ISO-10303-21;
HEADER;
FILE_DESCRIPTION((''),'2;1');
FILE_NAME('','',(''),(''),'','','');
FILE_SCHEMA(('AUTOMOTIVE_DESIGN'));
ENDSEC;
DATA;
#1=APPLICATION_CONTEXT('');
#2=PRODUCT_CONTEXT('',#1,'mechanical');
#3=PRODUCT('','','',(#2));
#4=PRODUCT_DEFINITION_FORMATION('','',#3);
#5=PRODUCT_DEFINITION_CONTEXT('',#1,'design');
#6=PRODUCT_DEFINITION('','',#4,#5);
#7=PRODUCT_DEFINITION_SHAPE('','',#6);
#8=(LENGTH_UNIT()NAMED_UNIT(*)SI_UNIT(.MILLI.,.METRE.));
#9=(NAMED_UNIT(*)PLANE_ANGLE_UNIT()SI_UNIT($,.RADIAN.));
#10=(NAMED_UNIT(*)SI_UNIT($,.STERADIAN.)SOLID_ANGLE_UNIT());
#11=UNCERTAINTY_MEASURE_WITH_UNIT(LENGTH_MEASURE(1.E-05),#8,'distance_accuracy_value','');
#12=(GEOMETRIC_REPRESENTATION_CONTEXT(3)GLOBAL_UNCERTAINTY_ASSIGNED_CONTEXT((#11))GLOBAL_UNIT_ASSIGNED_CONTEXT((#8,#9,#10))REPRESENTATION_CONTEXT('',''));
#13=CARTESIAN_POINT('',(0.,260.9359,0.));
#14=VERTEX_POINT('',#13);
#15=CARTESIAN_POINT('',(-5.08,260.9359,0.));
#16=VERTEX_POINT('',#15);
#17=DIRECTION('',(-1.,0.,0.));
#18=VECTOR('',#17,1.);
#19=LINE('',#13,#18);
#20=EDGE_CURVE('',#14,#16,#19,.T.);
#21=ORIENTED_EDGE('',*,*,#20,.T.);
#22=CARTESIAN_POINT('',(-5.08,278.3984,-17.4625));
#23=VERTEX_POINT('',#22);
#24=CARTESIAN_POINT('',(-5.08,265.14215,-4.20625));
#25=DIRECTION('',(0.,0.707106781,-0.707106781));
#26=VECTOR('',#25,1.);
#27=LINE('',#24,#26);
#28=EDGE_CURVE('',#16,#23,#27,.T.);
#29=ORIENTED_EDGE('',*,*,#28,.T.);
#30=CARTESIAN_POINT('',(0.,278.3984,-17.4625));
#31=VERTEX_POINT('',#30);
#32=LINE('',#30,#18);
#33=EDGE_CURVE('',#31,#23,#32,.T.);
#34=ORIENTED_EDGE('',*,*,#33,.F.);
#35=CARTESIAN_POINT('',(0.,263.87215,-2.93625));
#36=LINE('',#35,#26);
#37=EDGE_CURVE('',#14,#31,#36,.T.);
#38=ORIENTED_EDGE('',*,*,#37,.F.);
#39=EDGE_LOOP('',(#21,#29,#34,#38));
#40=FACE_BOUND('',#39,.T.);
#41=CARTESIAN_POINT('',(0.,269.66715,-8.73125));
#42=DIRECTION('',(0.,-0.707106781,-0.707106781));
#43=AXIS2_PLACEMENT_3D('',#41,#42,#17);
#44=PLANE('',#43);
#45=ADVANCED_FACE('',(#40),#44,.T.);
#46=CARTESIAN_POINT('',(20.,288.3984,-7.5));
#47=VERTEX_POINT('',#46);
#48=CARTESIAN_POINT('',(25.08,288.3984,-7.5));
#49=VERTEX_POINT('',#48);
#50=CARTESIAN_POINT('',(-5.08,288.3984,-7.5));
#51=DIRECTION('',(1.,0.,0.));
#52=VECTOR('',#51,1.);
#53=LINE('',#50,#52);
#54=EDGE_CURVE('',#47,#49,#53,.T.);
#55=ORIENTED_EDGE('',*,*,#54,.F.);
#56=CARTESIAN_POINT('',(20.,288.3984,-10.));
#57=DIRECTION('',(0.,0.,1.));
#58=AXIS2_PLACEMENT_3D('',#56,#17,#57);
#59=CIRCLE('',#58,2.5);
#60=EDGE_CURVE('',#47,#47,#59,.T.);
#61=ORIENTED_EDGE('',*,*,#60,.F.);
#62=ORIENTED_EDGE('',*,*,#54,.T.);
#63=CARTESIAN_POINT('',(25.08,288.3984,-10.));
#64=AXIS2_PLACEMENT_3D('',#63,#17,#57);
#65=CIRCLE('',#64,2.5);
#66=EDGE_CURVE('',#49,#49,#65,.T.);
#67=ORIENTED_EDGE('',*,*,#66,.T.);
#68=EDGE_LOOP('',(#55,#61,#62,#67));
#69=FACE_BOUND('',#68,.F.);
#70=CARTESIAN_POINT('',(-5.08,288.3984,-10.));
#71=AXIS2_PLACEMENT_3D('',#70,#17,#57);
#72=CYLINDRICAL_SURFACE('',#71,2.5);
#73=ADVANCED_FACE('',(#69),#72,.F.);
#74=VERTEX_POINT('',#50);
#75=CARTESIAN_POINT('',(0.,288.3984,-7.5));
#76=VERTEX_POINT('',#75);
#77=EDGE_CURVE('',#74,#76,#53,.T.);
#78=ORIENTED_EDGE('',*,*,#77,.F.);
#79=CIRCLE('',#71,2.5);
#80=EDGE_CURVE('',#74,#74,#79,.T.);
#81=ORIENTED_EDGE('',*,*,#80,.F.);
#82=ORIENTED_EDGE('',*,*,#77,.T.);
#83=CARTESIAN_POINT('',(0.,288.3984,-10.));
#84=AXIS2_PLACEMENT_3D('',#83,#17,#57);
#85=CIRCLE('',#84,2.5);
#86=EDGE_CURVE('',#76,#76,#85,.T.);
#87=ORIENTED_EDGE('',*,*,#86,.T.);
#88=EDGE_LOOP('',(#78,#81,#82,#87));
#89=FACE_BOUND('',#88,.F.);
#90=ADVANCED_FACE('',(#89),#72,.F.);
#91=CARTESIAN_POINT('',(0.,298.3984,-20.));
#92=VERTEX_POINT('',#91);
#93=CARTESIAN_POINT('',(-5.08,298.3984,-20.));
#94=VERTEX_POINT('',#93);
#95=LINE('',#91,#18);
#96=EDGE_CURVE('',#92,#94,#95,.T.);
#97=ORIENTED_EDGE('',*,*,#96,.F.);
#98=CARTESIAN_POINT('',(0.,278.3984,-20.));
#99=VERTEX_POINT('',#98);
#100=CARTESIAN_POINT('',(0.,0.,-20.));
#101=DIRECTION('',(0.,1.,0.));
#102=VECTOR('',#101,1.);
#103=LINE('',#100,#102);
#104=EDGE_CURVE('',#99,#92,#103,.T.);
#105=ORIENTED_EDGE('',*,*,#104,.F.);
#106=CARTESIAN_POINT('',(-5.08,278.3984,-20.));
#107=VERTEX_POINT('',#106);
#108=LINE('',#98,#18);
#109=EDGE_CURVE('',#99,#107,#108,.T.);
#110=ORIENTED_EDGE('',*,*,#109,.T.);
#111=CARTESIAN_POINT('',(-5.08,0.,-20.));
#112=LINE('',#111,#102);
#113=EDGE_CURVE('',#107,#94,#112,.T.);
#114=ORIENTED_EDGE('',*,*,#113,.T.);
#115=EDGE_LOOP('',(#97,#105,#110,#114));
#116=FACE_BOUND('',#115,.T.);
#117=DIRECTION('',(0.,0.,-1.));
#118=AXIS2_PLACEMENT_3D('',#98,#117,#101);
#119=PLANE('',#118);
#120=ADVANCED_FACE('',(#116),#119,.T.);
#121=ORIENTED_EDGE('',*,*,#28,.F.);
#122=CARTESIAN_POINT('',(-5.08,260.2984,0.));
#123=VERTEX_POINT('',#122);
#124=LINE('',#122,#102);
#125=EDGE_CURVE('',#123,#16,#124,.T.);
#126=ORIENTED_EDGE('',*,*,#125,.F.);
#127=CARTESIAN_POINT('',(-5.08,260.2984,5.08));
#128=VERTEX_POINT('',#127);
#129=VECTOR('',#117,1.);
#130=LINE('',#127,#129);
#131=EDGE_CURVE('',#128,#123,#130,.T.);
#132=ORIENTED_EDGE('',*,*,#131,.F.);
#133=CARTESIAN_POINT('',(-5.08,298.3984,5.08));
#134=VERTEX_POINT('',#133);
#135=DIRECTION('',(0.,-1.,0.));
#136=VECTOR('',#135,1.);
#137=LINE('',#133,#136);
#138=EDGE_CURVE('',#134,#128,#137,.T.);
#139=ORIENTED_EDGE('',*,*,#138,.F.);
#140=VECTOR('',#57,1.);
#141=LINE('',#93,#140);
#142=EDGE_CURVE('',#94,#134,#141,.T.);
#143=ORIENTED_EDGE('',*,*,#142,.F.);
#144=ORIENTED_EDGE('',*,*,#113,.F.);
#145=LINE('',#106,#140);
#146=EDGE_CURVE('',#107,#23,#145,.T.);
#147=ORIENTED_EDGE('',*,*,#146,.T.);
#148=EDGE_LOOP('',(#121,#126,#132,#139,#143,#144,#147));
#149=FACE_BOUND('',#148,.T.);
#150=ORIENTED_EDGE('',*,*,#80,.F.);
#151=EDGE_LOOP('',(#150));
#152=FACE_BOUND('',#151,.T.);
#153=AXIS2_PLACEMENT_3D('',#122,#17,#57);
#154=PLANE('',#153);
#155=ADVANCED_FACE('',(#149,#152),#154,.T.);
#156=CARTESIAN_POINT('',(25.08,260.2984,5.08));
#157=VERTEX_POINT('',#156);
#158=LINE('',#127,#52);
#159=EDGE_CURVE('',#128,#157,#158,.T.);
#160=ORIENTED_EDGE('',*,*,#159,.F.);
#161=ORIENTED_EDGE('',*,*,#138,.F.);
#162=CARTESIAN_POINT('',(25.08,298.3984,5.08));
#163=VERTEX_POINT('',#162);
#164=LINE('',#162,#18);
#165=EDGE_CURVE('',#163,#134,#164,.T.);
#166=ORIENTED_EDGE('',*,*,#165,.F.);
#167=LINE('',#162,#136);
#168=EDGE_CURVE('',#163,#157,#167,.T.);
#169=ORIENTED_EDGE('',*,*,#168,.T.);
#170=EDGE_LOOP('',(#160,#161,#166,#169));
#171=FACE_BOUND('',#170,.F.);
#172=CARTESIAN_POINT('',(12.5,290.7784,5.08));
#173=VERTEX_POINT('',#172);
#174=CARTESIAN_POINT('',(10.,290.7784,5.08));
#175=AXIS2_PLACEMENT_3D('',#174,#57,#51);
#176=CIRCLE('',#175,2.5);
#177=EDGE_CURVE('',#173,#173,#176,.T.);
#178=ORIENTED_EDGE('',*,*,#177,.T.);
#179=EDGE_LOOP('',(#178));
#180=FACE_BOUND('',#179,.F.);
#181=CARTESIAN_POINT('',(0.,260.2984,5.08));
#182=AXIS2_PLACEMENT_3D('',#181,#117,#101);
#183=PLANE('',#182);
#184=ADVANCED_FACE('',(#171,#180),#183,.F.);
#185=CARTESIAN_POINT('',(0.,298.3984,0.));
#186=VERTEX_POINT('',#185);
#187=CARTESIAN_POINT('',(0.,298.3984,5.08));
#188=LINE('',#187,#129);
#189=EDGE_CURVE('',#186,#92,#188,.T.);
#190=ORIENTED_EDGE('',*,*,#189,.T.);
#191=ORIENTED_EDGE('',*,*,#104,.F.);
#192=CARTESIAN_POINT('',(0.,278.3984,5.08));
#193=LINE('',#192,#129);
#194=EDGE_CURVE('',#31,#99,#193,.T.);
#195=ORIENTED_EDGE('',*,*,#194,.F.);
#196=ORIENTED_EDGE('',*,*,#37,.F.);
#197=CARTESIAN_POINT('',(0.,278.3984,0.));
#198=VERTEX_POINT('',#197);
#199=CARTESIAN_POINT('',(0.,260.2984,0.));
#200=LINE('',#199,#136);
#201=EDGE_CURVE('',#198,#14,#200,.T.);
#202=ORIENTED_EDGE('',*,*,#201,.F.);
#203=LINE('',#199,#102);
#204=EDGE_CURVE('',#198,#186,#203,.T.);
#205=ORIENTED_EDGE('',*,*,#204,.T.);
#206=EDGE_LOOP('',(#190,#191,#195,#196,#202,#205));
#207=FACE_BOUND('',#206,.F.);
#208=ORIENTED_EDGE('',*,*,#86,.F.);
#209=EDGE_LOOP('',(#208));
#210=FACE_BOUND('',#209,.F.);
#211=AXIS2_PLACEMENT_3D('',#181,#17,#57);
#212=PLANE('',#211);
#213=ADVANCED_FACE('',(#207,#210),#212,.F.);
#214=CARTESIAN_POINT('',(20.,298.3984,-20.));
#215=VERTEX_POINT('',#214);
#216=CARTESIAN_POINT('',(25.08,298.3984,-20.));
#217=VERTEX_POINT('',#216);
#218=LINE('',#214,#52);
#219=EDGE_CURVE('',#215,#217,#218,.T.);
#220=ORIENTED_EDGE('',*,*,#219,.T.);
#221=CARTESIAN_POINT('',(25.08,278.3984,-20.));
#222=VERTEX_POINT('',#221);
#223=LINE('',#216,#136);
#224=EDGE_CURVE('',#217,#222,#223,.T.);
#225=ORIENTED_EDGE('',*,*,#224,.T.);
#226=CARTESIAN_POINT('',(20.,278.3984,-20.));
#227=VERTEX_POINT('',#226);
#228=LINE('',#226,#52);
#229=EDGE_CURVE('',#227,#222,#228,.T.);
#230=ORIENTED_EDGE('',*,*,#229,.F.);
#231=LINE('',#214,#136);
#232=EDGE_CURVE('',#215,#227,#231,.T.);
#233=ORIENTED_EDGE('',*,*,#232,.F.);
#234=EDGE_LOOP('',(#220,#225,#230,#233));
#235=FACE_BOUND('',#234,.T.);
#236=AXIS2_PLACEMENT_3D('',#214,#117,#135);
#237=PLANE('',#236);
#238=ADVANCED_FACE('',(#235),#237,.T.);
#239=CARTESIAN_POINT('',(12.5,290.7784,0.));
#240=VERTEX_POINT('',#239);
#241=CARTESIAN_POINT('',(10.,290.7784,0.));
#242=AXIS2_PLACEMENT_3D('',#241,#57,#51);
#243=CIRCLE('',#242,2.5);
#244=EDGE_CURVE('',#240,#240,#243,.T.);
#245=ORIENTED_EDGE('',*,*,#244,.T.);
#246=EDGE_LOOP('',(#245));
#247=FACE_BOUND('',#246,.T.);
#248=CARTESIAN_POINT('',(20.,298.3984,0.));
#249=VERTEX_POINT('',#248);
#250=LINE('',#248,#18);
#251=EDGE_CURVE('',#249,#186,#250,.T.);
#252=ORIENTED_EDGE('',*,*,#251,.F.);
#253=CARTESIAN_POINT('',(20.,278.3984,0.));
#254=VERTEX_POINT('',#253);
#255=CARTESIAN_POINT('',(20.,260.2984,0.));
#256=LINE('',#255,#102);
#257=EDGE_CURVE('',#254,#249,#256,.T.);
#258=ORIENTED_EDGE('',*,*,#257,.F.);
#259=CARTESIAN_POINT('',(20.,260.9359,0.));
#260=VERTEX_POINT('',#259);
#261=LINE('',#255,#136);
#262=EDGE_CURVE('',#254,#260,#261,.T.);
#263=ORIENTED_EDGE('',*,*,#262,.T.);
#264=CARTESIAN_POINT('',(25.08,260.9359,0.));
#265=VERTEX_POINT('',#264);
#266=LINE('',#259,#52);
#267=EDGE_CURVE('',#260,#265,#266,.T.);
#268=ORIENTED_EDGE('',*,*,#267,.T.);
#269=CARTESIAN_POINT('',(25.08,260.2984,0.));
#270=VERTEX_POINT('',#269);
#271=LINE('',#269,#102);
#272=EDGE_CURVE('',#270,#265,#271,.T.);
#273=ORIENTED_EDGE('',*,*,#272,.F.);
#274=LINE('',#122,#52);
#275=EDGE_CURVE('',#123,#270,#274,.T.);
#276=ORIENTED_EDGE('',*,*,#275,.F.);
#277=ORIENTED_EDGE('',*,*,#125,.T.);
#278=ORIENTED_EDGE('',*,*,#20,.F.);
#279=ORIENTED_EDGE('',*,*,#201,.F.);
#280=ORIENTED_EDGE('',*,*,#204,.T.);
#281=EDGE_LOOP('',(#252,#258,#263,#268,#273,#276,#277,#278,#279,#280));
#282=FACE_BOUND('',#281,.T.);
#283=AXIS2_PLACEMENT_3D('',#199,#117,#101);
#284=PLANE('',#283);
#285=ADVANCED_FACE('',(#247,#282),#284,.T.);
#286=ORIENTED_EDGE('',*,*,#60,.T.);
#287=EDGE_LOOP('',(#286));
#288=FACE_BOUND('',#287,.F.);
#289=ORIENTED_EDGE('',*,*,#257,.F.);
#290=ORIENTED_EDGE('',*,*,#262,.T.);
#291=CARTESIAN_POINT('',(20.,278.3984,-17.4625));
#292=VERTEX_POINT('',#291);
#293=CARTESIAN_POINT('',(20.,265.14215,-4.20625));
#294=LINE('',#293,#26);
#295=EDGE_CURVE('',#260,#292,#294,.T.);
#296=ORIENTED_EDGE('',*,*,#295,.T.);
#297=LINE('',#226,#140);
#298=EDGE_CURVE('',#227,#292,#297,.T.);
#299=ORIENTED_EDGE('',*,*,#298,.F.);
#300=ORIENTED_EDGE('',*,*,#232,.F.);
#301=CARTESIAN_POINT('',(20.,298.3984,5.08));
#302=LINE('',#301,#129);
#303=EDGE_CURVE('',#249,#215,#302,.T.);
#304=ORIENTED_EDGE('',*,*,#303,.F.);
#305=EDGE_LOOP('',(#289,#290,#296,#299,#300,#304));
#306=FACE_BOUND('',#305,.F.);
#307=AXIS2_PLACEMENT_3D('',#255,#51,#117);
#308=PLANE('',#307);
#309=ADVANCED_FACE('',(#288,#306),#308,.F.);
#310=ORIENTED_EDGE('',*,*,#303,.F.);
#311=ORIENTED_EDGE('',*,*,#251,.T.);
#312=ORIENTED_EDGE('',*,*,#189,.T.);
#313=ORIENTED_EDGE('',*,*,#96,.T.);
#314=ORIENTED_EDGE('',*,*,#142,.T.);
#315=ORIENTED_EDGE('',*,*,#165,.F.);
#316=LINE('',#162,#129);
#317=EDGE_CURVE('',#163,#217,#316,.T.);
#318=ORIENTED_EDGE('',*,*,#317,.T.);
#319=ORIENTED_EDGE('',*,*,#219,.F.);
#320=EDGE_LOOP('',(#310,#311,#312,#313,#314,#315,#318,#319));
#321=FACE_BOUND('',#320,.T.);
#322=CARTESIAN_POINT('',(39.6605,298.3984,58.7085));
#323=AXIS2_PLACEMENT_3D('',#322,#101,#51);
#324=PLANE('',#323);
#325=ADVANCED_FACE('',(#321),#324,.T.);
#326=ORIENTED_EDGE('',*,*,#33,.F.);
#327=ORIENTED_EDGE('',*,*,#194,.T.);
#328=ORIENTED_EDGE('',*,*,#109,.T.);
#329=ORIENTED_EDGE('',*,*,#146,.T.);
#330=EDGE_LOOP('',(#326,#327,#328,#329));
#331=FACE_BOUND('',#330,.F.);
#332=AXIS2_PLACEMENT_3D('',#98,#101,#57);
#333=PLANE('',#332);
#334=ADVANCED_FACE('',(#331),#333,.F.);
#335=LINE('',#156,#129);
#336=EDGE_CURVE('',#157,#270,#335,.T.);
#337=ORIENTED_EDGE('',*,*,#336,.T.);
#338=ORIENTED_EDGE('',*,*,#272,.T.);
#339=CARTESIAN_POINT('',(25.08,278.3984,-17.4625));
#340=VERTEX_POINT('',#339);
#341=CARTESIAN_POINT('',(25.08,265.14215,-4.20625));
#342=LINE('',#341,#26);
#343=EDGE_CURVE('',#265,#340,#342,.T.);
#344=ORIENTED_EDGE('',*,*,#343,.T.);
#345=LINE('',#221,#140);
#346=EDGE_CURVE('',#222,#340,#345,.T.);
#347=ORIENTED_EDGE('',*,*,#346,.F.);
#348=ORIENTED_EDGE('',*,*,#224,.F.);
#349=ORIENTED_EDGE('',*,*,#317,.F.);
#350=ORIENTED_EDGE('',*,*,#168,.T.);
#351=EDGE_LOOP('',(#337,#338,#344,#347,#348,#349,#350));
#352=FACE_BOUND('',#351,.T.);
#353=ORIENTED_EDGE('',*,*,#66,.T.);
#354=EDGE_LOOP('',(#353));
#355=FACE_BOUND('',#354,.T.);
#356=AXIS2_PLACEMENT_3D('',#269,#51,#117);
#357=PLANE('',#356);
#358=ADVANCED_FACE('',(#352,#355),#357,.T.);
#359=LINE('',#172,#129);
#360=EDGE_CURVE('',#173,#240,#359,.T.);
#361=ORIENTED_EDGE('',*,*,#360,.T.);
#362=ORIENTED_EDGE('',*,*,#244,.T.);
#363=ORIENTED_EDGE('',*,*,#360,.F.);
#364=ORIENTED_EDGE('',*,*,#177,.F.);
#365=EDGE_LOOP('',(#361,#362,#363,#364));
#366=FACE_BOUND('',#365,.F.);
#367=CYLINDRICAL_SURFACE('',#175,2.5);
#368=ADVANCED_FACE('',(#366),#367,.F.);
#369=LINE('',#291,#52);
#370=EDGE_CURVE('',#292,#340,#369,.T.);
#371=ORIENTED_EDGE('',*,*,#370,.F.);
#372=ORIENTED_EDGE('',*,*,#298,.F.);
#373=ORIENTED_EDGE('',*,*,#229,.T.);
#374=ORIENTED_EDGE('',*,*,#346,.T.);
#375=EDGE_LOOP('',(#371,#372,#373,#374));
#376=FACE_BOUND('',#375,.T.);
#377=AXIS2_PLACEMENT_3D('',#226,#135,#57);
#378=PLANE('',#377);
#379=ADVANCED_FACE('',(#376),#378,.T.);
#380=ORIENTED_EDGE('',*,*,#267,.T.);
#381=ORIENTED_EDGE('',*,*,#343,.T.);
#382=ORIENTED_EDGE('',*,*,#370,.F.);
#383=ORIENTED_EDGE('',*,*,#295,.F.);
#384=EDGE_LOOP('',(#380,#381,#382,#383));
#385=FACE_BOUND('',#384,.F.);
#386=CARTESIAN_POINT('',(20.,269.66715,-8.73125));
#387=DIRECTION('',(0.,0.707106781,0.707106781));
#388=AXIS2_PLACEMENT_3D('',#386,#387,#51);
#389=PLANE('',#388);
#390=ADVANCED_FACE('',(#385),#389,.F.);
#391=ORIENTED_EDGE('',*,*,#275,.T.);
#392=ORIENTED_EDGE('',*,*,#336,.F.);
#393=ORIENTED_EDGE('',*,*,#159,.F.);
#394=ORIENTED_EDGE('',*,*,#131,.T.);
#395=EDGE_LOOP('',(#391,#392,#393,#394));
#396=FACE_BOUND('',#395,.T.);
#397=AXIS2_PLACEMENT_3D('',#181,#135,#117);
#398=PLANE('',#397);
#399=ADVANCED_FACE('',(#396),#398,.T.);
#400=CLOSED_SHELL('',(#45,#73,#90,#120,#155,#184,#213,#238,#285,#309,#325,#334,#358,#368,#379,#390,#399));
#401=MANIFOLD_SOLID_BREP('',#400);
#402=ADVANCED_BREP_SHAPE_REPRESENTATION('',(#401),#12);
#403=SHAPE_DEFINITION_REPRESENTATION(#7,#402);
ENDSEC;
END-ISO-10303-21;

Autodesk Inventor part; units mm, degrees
ref_plane "YZ Plane" through (0, 0, 0) normal (1, 0, 0) x (0, 1, 0)
ref_plane "XZ Plane" through (0, 0, 0) normal (0, 1, 0) x (-1, 0, 0)
ref_plane "XY Plane" through (0, 0, 0) normal (0, 0, 1) x (1, 0, 0)
ref_plane "Work Plane1" through (39.6605, 279.3484, 58.7085) normal (0, 1, 0) x (1, 0, 0)
sketch "Sketch1" plane through (39.6605, 279.3484, 58.7085) normal (0, 1, 0) x (1, 0, 0)
  line L0 (-19.6605, 58.7085) -> (-19.6605, 78.7085) projected
  line L1 (-19.6605, 58.7085) -> (-19.6605, 58.7085) projected
  line L2 (-19.6605, 58.7085) -> (-19.6605, 78.7085) projected
  line L3 (-19.6605, 78.7085) -> (-19.6605, 78.7085) projected
  line L4 (-39.6605, 78.7085) -> (-39.6605, 58.7085) projected
  line L5 (-39.6605, 78.7085) -> (-39.6605, 78.7085) projected
  line L6 (-39.6605, 78.7085) -> (-39.6605, 58.7085) projected
  line L7 (-39.6605, 58.7085) -> (-39.6605, 58.7085) projected
  line L8 (-19.6605, 58.7085) -> (-39.6605, 58.7085)
  line L9 (-39.6605, 58.7085) -> (-39.6605, 53.6285)
  line L10 (-39.6605, 53.6285) -> (-19.6605, 53.6285)
  line L11 (-19.6605, 53.6285) -> (-19.6605, 58.7085)
  dimension "d0" = 5.08
extrude "Extrusion1" add sketch "Sketch1" along normal mid plane 38.1
sketch "Sketch2" plane through (0, 298.3984, 5.08) normal (0, 0, 1) x (1, 0, 0)
  line L0 (20, -38.1) -> (20, 0) projected
  line L1 (0, 0) -> (20, 0) projected
  line L2 (0, -38.1) -> (0, 0) projected
  line L3 (20, -38.1) -> (0, -38.1) projected
  circle A0 centre (10, -7.62) radius 2.5
  point P0 (0, -298.3984)
  dimension "d3" = 5
  dimension "d6" = 7.62
extrude "Extrusion3" cut sketch "Sketch2" against normal blind 38.1 contours A0
sketch "Sketch3" plane through (0, 260.2984, 5.08) normal (-1, 0, 0) x (0, 0, 1)
  line L0 (-25.08, 298.5016) -> (-5.08, 298.5016) projected
  line L1 (-25.08, -260.2984) -> (-25.08, 298.5016) projected
  line L2 (-25.08, -260.2984) -> (-5.08, -260.2984) projected
  line L3 (-5.08, -260.2984) -> (-5.08, 298.5016) projected
  line L4 (0, 0) -> (0, 38.1) projected
  line L5 (-5.08, 38.1) -> (0, 38.1) projected
  line L6 (-5.08, 0) -> (-5.08, 38.1) projected
  line L7 (0, 0) -> (-5.08, 0) projected
  line L8 (0, 38.1) -> (-25.08, 38.1)
  line L9 (-25.08, 38.1) -> (-25.08, 18.1)
  line L10 (-25.08, 18.1) -> (0, 18.1)
  line L11 (0, 18.1) -> (0, 38.1)
  dimension "d11" = 20
extrude "Extrusion4" add sketch "Sketch3" along normal blind 5.08 contours L8 L3 L10 L1 | L5 L4 L10 L3
sketch "Sketch4" plane through (20, 260.2984, 0) normal (1, 0, 0) x (0, 0, -1)
  line L0 (20, 18.1) -> (-5.08, 18.1) projected
  line L1 (-5.08, 18.1) -> (-5.08, 38.1) projected
  line L2 (-5.08, 38.1) -> (20, 38.1) projected
  line L3 (20, 38.1) -> (20, 18.1) projected
  line L4 (-5.08, 18.1) -> (0, 18.1) projected
  line L5 (0, 0) -> (0, 18.1) projected
  line L6 (-5.08, 0) -> (0, 0) projected
  line L7 (-5.08, 0) -> (-5.08, 18.1) projected
  point P0 (0, -260.2984)
extrude "Extrusion5" add sketch "Sketch4" along normal blind 5.08
sketch "Sketch5" plane through (0, 260.2984, 0) normal (-1, 0, 0) x (0, 0, 1)
  line L0 (5.08, 18.1) -> (0, 18.1) projected
  line L1 (0, 0) -> (0, 18.1) projected
  line L2 (5.08, 0) -> (0, 0) projected
  line L3 (5.08, 0) -> (5.08, 18.1) projected
  point P0 (0, -260.2984)
extrude "Extrusion6" add sketch "Sketch5" along normal blind 5.08
sketch "Sketch6" plane through (-5.08, 260.2984, 5.08) normal (-1, 0, 0) x (0, 0, 1)
  line L0 (-25.08, 18.1) -> (-5.08, 18.1) projected
  line L1 (-5.08, 18.1) -> (-5.08, 0) projected
  line L2 (-5.08, 0) -> (0, 0) projected
  line L3 (0, 0) -> (0, 38.1) projected
  line L4 (0, 38.1) -> (-25.08, 38.1) projected
  line L5 (-25.08, 38.1) -> (-25.08, 18.1) projected
  circle A0 centre (-15.08, 28.1) radius 2.5
  point P0 (-5.08, -260.2984)
  dimension "d18" = 5
extrude "Extrusion7" cut sketch "Sketch6" along normal mid plane 2540 contours A0
chamfer "Chamfer1" distance 17.4625 angle 45 2 edges at (-2.54, 278.3984, 0) (22.54, 278.3984, 0)
properties part number "Y belt mount point"
